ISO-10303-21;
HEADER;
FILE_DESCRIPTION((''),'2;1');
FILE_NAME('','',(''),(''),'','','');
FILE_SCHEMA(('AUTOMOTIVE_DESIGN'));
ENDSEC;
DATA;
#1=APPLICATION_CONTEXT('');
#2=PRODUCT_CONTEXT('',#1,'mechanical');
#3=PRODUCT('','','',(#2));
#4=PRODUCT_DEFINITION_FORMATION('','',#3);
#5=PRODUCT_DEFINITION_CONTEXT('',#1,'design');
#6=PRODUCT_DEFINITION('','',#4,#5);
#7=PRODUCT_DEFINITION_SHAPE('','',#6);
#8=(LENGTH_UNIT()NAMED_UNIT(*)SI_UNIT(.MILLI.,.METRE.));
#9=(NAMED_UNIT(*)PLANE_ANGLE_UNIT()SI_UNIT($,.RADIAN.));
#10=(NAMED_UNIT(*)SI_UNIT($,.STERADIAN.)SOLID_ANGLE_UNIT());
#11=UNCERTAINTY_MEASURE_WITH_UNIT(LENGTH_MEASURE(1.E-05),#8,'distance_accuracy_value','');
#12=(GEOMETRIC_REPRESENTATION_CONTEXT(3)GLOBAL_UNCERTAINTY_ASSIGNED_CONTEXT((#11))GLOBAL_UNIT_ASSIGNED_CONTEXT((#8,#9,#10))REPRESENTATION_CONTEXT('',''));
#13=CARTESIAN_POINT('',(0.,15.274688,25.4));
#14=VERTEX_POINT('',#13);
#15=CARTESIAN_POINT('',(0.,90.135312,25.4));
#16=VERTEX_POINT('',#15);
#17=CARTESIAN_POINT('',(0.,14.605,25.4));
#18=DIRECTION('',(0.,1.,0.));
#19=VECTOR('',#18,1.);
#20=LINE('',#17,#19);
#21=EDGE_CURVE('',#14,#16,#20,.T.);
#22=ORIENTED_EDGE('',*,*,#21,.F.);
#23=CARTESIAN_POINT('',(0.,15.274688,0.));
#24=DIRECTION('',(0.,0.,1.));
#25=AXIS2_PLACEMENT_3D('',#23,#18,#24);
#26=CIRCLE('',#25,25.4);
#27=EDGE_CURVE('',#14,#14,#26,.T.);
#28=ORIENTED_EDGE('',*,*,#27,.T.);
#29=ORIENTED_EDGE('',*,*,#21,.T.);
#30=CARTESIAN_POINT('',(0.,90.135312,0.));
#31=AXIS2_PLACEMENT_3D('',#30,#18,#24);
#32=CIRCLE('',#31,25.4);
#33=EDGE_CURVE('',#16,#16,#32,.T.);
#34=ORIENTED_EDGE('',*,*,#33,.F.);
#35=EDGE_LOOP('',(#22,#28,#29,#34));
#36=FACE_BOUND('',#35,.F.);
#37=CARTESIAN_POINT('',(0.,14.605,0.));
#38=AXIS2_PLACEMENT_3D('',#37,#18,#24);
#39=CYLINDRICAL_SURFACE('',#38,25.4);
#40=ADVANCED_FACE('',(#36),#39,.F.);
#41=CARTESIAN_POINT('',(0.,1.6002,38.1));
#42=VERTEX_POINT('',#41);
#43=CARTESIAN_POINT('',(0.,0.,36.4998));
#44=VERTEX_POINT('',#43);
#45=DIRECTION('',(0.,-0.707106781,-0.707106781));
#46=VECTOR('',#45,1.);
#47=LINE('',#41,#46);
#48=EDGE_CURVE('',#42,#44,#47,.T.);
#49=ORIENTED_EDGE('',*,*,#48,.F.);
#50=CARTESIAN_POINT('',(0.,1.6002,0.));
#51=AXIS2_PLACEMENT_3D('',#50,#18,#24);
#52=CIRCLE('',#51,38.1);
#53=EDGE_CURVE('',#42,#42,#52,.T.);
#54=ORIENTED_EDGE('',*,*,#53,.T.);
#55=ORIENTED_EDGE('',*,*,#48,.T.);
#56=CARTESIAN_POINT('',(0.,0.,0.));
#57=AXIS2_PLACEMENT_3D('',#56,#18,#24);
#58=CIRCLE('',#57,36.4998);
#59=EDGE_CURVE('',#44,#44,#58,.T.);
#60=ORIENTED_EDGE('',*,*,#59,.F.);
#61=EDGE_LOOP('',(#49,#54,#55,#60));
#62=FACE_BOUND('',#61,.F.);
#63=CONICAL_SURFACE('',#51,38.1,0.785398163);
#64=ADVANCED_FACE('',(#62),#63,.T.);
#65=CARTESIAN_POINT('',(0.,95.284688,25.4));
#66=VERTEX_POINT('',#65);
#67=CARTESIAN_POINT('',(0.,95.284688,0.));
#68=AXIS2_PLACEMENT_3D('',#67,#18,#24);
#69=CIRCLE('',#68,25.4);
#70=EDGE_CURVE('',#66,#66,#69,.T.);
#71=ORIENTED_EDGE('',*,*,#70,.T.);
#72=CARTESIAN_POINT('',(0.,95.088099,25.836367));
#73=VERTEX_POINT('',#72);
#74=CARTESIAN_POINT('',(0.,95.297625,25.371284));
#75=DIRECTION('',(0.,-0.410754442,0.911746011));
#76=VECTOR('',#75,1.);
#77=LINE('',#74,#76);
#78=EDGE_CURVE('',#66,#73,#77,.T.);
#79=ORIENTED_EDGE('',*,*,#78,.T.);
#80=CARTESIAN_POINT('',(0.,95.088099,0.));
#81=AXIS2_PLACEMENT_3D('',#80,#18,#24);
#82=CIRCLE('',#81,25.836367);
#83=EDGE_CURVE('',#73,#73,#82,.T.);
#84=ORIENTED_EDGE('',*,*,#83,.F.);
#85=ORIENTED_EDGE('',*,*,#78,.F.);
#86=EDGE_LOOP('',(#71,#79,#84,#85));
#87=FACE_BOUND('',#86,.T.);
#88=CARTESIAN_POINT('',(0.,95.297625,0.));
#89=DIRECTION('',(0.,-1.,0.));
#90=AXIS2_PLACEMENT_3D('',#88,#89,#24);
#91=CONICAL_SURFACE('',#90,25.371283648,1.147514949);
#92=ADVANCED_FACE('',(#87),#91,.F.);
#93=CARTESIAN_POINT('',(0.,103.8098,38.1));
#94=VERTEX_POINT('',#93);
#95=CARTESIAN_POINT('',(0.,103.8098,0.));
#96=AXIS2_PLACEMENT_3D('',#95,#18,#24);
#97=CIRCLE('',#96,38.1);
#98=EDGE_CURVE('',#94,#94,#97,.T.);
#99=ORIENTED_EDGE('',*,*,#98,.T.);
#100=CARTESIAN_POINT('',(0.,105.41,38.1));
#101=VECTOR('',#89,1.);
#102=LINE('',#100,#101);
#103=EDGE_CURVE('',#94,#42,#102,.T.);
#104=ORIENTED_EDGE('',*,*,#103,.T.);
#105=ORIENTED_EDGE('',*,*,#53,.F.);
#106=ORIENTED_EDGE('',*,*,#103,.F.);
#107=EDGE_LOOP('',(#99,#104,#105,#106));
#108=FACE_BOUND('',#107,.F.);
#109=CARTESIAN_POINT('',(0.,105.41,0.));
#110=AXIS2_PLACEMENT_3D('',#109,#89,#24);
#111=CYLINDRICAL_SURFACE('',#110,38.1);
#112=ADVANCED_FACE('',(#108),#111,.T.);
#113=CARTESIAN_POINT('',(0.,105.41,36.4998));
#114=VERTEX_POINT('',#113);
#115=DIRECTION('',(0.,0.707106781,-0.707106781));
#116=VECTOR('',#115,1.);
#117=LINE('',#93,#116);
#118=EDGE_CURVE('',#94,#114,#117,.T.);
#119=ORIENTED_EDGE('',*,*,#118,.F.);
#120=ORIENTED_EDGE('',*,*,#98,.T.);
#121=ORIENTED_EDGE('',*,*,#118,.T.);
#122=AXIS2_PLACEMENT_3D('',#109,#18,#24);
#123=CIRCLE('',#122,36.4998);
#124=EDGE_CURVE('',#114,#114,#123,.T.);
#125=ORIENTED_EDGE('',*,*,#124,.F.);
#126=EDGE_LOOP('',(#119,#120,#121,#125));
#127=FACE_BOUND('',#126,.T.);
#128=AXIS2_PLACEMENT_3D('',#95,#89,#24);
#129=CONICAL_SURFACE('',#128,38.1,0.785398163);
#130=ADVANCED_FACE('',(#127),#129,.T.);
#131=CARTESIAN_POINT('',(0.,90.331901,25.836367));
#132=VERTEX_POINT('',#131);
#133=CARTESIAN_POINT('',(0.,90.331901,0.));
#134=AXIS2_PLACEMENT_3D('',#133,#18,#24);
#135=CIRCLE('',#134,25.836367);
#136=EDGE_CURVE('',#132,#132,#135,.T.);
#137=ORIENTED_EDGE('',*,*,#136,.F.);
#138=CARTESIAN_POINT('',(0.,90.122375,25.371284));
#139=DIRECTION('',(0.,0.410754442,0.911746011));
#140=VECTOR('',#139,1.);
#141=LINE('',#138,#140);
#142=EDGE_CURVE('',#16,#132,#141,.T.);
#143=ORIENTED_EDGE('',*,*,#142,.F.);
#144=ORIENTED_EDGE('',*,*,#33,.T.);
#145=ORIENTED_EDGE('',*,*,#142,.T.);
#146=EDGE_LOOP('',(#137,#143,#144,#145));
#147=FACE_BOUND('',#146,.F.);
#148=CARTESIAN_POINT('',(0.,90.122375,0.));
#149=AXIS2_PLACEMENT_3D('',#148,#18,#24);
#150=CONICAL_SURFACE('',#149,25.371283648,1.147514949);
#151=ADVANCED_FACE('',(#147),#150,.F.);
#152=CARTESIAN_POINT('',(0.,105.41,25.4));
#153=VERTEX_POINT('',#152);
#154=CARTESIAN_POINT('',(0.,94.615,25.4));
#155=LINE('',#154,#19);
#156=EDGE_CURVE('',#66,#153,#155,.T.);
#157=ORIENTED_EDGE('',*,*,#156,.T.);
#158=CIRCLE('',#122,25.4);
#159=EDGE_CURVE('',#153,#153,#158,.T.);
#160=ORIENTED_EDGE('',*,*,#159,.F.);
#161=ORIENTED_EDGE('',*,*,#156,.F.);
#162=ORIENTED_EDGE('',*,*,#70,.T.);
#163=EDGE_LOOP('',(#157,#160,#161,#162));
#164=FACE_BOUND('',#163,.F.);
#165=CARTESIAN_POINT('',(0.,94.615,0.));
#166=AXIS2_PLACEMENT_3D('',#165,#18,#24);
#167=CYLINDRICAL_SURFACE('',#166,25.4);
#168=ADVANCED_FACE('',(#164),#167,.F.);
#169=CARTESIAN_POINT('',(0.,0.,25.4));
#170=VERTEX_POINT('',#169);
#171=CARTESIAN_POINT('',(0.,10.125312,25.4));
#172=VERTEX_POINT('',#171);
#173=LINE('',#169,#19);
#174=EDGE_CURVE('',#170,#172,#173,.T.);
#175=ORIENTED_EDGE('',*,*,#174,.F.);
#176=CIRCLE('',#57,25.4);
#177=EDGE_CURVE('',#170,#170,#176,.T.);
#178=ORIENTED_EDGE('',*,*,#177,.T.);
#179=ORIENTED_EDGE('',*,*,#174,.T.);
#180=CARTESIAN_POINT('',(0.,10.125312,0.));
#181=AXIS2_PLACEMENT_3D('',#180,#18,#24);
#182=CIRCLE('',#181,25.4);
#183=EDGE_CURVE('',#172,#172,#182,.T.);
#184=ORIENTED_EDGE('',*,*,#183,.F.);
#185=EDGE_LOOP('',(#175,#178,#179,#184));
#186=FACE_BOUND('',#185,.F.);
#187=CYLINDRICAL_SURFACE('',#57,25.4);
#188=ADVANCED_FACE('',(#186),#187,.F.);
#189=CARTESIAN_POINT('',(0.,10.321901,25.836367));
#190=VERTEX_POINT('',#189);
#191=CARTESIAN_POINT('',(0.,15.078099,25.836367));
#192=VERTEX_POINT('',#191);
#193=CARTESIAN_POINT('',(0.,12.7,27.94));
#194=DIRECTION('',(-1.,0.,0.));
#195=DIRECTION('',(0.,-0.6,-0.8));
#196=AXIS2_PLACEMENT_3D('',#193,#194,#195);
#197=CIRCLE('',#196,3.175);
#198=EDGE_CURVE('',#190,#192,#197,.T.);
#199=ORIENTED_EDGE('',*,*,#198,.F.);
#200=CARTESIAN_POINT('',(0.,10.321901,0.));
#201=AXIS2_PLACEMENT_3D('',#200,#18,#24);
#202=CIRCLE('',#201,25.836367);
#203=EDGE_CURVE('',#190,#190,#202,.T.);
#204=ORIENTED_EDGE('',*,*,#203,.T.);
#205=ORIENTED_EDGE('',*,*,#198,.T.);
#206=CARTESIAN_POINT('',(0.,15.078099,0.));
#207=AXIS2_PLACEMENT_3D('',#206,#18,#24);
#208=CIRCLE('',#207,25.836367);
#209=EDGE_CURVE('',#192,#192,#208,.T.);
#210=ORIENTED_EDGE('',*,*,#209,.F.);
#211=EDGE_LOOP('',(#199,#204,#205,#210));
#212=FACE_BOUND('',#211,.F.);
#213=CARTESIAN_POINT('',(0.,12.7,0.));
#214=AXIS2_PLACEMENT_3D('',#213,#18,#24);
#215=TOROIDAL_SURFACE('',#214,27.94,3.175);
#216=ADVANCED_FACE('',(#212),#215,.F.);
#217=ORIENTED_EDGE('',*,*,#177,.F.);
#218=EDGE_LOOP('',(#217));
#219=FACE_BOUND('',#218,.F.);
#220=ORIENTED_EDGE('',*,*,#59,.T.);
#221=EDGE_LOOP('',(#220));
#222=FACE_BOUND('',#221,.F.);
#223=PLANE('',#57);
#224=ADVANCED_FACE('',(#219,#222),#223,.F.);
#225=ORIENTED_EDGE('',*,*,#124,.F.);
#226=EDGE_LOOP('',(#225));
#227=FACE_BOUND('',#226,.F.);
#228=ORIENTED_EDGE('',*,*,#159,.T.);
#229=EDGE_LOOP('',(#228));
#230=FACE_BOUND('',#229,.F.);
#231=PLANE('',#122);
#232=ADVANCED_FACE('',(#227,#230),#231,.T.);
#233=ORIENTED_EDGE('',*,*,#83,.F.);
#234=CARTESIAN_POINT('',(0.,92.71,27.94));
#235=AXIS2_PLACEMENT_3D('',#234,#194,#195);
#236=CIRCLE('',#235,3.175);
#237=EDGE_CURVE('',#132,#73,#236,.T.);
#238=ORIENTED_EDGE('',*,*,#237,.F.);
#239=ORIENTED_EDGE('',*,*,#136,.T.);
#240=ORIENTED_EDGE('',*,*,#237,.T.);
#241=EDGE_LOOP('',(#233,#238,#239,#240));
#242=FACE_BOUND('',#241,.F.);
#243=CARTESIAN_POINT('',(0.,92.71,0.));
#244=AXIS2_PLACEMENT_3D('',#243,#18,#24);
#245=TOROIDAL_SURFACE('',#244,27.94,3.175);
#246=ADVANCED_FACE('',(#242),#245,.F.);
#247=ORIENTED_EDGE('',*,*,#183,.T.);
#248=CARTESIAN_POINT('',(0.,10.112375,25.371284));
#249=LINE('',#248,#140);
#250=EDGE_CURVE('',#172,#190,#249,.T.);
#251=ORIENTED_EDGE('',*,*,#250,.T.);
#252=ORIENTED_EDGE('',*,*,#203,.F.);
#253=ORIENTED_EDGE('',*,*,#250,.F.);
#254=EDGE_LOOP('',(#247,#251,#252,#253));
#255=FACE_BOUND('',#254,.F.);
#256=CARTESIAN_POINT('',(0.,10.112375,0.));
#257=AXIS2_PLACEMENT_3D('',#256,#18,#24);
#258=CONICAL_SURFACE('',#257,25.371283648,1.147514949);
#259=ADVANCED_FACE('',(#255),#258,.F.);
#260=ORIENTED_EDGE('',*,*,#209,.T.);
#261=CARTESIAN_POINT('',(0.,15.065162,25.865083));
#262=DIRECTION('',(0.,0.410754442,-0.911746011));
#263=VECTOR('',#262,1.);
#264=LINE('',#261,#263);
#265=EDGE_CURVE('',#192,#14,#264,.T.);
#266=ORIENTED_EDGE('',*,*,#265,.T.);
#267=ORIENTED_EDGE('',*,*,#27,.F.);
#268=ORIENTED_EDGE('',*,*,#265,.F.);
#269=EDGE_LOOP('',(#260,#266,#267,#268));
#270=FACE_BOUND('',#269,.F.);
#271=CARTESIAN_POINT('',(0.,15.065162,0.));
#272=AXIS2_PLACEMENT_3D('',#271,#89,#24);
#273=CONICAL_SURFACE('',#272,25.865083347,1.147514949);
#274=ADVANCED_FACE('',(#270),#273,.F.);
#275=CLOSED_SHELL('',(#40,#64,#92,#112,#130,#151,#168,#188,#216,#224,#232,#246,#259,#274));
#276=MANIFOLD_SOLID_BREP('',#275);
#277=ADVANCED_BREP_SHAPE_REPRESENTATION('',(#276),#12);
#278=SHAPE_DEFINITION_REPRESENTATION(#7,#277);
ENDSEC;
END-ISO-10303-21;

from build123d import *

# Parameters (mm, degrees)
F3_SIZE = 1.6002


# Not quite as in the source:
# - a fillet or chamfer that OpenCascade refuses, or shapes differently, is made with other operations: its cross-section is extruded or revolved along the edge and cut away or added


with BuildPart() as f1:
    # F0 (on Right) → F1 (revolve)
    with BuildSketch(Plane.YZ):
        with BuildLine():
            Line((105.41, 38.1), (0, 38.1))
            Line((0, 38.1), (0, 25.4))
            Line((0, 25.4), (10.795, 25.4))
            ThreePointArc((10.795, 25.4), (12.7, 31.115), (14.605, 25.4))
            Line((14.605, 25.4), (90.805, 25.4))
            ThreePointArc((90.805, 25.4), (92.71, 31.115), (94.615, 25.4))
            Line((94.615, 25.4), (105.41, 25.4))
            Line((105.41, 25.4), (105.41, 38.1))
        make_face()
    revolve(axis=Axis((0, 63.5, 0), (0, 1, 0)))

    # F2: chamfer of 0.7874 on 6 edges, made by hand

    # F2_s1 → F2_t2 (revolve, cut)
    with BuildSketch(Plane.YZ):
        with BuildLine():
            Line((10.1123747416, 25.3712836476), (10.3348384737, 25.8650833474))
            Line((10.3348384737, 25.8650833474), (10.346633843, 25.8755173671))
            ThreePointArc((10.346633843, 25.8755173671), (10.5543660431, 25.6211364589), (10.8044488, 25.4125984))
            Line((10.8044488, 25.4125984), (10.795, 25.384252))
            ThreePointArc((10.795, 25.384252), (10.4536873708, 25.384252), (10.1123747416, 25.3555356476))
            Line((10.1123747416, 25.3555356476), (10.1123747416, 25.3712836476))
        make_face()
    revolve(axis=Axis((0, 10.795, 0), (0, 1, 0)), mode=Mode.SUBTRACT)

    # F2_s3 → F2_t4 (revolve, cut)
    with BuildSketch(Plane.YZ):
        with BuildLine():
            Line((15.0651615263, 25.8650833474), (15.2876252584, 25.3712836476))
            Line((15.2876252584, 25.3712836476), (15.2876252584, 25.3555356476))
            ThreePointArc((15.2876252584, 25.3555356476), (14.9463126292, 25.384252), (14.605, 25.384252))
            Line((14.605, 25.384252), (14.5955512, 25.4125984))
            ThreePointArc((14.5955512, 25.4125984), (14.8456339569, 25.6211364589), (15.053366157, 25.8755173671))
            Line((15.053366157, 25.8755173671), (15.0651615263, 25.8650833474))
        make_face()
    revolve(axis=Axis((0, 14.605, 0), (0, 1, 0)), mode=Mode.SUBTRACT)

    # F2_s5 → F2_t6 (revolve, cut)
    with BuildSketch(Plane.YZ):
        with BuildLine():
            Line((90.1223747416, 25.3712836476), (90.3448384737, 25.8650833474))
            Line((90.3448384737, 25.8650833474), (90.356633843, 25.8755173671))
            ThreePointArc((90.356633843, 25.8755173671), (90.5643660431, 25.6211364589), (90.8144488, 25.4125984))
            Line((90.8144488, 25.4125984), (90.805, 25.384252))
            ThreePointArc((90.805, 25.384252), (90.4636873708, 25.384252), (90.1223747416, 25.3555356476))
            Line((90.1223747416, 25.3555356476), (90.1223747416, 25.3712836476))
        make_face()
    revolve(axis=Axis((0, 90.805, 0), (0, 1, 0)), mode=Mode.SUBTRACT)

    # F2_s7 → F2_t8 (revolve, cut)
    with BuildSketch(Plane.YZ):
        with BuildLine():
            Line((95.2976252584, 25.3712836476), (95.0751615263, 25.8650833474))
            Line((95.0751615263, 25.8650833474), (95.063366157, 25.8755173671))
            ThreePointArc((95.063366157, 25.8755173671), (94.8556339569, 25.6211364589), (94.6055512, 25.4125984))
            Line((94.6055512, 25.4125984), (94.615, 25.384252))
            ThreePointArc((94.615, 25.384252), (94.9563126292, 25.384252), (95.2976252584, 25.3555356476))
            Line((95.2976252584, 25.3555356476), (95.2976252584, 25.3712836476))
        make_face()
    revolve(axis=Axis((0, 94.615, 0), (0, 1, 0)), mode=Mode.SUBTRACT)

    # F3
    f3_edges = [f1.edges().sort_by_distance(p)[0] for p in [
        (0, 105.41, -38.1),
        (0, 0, -38.1),
    ]]
    chamfer(f3_edges, length=F3_SIZE)


solid = f1.part
